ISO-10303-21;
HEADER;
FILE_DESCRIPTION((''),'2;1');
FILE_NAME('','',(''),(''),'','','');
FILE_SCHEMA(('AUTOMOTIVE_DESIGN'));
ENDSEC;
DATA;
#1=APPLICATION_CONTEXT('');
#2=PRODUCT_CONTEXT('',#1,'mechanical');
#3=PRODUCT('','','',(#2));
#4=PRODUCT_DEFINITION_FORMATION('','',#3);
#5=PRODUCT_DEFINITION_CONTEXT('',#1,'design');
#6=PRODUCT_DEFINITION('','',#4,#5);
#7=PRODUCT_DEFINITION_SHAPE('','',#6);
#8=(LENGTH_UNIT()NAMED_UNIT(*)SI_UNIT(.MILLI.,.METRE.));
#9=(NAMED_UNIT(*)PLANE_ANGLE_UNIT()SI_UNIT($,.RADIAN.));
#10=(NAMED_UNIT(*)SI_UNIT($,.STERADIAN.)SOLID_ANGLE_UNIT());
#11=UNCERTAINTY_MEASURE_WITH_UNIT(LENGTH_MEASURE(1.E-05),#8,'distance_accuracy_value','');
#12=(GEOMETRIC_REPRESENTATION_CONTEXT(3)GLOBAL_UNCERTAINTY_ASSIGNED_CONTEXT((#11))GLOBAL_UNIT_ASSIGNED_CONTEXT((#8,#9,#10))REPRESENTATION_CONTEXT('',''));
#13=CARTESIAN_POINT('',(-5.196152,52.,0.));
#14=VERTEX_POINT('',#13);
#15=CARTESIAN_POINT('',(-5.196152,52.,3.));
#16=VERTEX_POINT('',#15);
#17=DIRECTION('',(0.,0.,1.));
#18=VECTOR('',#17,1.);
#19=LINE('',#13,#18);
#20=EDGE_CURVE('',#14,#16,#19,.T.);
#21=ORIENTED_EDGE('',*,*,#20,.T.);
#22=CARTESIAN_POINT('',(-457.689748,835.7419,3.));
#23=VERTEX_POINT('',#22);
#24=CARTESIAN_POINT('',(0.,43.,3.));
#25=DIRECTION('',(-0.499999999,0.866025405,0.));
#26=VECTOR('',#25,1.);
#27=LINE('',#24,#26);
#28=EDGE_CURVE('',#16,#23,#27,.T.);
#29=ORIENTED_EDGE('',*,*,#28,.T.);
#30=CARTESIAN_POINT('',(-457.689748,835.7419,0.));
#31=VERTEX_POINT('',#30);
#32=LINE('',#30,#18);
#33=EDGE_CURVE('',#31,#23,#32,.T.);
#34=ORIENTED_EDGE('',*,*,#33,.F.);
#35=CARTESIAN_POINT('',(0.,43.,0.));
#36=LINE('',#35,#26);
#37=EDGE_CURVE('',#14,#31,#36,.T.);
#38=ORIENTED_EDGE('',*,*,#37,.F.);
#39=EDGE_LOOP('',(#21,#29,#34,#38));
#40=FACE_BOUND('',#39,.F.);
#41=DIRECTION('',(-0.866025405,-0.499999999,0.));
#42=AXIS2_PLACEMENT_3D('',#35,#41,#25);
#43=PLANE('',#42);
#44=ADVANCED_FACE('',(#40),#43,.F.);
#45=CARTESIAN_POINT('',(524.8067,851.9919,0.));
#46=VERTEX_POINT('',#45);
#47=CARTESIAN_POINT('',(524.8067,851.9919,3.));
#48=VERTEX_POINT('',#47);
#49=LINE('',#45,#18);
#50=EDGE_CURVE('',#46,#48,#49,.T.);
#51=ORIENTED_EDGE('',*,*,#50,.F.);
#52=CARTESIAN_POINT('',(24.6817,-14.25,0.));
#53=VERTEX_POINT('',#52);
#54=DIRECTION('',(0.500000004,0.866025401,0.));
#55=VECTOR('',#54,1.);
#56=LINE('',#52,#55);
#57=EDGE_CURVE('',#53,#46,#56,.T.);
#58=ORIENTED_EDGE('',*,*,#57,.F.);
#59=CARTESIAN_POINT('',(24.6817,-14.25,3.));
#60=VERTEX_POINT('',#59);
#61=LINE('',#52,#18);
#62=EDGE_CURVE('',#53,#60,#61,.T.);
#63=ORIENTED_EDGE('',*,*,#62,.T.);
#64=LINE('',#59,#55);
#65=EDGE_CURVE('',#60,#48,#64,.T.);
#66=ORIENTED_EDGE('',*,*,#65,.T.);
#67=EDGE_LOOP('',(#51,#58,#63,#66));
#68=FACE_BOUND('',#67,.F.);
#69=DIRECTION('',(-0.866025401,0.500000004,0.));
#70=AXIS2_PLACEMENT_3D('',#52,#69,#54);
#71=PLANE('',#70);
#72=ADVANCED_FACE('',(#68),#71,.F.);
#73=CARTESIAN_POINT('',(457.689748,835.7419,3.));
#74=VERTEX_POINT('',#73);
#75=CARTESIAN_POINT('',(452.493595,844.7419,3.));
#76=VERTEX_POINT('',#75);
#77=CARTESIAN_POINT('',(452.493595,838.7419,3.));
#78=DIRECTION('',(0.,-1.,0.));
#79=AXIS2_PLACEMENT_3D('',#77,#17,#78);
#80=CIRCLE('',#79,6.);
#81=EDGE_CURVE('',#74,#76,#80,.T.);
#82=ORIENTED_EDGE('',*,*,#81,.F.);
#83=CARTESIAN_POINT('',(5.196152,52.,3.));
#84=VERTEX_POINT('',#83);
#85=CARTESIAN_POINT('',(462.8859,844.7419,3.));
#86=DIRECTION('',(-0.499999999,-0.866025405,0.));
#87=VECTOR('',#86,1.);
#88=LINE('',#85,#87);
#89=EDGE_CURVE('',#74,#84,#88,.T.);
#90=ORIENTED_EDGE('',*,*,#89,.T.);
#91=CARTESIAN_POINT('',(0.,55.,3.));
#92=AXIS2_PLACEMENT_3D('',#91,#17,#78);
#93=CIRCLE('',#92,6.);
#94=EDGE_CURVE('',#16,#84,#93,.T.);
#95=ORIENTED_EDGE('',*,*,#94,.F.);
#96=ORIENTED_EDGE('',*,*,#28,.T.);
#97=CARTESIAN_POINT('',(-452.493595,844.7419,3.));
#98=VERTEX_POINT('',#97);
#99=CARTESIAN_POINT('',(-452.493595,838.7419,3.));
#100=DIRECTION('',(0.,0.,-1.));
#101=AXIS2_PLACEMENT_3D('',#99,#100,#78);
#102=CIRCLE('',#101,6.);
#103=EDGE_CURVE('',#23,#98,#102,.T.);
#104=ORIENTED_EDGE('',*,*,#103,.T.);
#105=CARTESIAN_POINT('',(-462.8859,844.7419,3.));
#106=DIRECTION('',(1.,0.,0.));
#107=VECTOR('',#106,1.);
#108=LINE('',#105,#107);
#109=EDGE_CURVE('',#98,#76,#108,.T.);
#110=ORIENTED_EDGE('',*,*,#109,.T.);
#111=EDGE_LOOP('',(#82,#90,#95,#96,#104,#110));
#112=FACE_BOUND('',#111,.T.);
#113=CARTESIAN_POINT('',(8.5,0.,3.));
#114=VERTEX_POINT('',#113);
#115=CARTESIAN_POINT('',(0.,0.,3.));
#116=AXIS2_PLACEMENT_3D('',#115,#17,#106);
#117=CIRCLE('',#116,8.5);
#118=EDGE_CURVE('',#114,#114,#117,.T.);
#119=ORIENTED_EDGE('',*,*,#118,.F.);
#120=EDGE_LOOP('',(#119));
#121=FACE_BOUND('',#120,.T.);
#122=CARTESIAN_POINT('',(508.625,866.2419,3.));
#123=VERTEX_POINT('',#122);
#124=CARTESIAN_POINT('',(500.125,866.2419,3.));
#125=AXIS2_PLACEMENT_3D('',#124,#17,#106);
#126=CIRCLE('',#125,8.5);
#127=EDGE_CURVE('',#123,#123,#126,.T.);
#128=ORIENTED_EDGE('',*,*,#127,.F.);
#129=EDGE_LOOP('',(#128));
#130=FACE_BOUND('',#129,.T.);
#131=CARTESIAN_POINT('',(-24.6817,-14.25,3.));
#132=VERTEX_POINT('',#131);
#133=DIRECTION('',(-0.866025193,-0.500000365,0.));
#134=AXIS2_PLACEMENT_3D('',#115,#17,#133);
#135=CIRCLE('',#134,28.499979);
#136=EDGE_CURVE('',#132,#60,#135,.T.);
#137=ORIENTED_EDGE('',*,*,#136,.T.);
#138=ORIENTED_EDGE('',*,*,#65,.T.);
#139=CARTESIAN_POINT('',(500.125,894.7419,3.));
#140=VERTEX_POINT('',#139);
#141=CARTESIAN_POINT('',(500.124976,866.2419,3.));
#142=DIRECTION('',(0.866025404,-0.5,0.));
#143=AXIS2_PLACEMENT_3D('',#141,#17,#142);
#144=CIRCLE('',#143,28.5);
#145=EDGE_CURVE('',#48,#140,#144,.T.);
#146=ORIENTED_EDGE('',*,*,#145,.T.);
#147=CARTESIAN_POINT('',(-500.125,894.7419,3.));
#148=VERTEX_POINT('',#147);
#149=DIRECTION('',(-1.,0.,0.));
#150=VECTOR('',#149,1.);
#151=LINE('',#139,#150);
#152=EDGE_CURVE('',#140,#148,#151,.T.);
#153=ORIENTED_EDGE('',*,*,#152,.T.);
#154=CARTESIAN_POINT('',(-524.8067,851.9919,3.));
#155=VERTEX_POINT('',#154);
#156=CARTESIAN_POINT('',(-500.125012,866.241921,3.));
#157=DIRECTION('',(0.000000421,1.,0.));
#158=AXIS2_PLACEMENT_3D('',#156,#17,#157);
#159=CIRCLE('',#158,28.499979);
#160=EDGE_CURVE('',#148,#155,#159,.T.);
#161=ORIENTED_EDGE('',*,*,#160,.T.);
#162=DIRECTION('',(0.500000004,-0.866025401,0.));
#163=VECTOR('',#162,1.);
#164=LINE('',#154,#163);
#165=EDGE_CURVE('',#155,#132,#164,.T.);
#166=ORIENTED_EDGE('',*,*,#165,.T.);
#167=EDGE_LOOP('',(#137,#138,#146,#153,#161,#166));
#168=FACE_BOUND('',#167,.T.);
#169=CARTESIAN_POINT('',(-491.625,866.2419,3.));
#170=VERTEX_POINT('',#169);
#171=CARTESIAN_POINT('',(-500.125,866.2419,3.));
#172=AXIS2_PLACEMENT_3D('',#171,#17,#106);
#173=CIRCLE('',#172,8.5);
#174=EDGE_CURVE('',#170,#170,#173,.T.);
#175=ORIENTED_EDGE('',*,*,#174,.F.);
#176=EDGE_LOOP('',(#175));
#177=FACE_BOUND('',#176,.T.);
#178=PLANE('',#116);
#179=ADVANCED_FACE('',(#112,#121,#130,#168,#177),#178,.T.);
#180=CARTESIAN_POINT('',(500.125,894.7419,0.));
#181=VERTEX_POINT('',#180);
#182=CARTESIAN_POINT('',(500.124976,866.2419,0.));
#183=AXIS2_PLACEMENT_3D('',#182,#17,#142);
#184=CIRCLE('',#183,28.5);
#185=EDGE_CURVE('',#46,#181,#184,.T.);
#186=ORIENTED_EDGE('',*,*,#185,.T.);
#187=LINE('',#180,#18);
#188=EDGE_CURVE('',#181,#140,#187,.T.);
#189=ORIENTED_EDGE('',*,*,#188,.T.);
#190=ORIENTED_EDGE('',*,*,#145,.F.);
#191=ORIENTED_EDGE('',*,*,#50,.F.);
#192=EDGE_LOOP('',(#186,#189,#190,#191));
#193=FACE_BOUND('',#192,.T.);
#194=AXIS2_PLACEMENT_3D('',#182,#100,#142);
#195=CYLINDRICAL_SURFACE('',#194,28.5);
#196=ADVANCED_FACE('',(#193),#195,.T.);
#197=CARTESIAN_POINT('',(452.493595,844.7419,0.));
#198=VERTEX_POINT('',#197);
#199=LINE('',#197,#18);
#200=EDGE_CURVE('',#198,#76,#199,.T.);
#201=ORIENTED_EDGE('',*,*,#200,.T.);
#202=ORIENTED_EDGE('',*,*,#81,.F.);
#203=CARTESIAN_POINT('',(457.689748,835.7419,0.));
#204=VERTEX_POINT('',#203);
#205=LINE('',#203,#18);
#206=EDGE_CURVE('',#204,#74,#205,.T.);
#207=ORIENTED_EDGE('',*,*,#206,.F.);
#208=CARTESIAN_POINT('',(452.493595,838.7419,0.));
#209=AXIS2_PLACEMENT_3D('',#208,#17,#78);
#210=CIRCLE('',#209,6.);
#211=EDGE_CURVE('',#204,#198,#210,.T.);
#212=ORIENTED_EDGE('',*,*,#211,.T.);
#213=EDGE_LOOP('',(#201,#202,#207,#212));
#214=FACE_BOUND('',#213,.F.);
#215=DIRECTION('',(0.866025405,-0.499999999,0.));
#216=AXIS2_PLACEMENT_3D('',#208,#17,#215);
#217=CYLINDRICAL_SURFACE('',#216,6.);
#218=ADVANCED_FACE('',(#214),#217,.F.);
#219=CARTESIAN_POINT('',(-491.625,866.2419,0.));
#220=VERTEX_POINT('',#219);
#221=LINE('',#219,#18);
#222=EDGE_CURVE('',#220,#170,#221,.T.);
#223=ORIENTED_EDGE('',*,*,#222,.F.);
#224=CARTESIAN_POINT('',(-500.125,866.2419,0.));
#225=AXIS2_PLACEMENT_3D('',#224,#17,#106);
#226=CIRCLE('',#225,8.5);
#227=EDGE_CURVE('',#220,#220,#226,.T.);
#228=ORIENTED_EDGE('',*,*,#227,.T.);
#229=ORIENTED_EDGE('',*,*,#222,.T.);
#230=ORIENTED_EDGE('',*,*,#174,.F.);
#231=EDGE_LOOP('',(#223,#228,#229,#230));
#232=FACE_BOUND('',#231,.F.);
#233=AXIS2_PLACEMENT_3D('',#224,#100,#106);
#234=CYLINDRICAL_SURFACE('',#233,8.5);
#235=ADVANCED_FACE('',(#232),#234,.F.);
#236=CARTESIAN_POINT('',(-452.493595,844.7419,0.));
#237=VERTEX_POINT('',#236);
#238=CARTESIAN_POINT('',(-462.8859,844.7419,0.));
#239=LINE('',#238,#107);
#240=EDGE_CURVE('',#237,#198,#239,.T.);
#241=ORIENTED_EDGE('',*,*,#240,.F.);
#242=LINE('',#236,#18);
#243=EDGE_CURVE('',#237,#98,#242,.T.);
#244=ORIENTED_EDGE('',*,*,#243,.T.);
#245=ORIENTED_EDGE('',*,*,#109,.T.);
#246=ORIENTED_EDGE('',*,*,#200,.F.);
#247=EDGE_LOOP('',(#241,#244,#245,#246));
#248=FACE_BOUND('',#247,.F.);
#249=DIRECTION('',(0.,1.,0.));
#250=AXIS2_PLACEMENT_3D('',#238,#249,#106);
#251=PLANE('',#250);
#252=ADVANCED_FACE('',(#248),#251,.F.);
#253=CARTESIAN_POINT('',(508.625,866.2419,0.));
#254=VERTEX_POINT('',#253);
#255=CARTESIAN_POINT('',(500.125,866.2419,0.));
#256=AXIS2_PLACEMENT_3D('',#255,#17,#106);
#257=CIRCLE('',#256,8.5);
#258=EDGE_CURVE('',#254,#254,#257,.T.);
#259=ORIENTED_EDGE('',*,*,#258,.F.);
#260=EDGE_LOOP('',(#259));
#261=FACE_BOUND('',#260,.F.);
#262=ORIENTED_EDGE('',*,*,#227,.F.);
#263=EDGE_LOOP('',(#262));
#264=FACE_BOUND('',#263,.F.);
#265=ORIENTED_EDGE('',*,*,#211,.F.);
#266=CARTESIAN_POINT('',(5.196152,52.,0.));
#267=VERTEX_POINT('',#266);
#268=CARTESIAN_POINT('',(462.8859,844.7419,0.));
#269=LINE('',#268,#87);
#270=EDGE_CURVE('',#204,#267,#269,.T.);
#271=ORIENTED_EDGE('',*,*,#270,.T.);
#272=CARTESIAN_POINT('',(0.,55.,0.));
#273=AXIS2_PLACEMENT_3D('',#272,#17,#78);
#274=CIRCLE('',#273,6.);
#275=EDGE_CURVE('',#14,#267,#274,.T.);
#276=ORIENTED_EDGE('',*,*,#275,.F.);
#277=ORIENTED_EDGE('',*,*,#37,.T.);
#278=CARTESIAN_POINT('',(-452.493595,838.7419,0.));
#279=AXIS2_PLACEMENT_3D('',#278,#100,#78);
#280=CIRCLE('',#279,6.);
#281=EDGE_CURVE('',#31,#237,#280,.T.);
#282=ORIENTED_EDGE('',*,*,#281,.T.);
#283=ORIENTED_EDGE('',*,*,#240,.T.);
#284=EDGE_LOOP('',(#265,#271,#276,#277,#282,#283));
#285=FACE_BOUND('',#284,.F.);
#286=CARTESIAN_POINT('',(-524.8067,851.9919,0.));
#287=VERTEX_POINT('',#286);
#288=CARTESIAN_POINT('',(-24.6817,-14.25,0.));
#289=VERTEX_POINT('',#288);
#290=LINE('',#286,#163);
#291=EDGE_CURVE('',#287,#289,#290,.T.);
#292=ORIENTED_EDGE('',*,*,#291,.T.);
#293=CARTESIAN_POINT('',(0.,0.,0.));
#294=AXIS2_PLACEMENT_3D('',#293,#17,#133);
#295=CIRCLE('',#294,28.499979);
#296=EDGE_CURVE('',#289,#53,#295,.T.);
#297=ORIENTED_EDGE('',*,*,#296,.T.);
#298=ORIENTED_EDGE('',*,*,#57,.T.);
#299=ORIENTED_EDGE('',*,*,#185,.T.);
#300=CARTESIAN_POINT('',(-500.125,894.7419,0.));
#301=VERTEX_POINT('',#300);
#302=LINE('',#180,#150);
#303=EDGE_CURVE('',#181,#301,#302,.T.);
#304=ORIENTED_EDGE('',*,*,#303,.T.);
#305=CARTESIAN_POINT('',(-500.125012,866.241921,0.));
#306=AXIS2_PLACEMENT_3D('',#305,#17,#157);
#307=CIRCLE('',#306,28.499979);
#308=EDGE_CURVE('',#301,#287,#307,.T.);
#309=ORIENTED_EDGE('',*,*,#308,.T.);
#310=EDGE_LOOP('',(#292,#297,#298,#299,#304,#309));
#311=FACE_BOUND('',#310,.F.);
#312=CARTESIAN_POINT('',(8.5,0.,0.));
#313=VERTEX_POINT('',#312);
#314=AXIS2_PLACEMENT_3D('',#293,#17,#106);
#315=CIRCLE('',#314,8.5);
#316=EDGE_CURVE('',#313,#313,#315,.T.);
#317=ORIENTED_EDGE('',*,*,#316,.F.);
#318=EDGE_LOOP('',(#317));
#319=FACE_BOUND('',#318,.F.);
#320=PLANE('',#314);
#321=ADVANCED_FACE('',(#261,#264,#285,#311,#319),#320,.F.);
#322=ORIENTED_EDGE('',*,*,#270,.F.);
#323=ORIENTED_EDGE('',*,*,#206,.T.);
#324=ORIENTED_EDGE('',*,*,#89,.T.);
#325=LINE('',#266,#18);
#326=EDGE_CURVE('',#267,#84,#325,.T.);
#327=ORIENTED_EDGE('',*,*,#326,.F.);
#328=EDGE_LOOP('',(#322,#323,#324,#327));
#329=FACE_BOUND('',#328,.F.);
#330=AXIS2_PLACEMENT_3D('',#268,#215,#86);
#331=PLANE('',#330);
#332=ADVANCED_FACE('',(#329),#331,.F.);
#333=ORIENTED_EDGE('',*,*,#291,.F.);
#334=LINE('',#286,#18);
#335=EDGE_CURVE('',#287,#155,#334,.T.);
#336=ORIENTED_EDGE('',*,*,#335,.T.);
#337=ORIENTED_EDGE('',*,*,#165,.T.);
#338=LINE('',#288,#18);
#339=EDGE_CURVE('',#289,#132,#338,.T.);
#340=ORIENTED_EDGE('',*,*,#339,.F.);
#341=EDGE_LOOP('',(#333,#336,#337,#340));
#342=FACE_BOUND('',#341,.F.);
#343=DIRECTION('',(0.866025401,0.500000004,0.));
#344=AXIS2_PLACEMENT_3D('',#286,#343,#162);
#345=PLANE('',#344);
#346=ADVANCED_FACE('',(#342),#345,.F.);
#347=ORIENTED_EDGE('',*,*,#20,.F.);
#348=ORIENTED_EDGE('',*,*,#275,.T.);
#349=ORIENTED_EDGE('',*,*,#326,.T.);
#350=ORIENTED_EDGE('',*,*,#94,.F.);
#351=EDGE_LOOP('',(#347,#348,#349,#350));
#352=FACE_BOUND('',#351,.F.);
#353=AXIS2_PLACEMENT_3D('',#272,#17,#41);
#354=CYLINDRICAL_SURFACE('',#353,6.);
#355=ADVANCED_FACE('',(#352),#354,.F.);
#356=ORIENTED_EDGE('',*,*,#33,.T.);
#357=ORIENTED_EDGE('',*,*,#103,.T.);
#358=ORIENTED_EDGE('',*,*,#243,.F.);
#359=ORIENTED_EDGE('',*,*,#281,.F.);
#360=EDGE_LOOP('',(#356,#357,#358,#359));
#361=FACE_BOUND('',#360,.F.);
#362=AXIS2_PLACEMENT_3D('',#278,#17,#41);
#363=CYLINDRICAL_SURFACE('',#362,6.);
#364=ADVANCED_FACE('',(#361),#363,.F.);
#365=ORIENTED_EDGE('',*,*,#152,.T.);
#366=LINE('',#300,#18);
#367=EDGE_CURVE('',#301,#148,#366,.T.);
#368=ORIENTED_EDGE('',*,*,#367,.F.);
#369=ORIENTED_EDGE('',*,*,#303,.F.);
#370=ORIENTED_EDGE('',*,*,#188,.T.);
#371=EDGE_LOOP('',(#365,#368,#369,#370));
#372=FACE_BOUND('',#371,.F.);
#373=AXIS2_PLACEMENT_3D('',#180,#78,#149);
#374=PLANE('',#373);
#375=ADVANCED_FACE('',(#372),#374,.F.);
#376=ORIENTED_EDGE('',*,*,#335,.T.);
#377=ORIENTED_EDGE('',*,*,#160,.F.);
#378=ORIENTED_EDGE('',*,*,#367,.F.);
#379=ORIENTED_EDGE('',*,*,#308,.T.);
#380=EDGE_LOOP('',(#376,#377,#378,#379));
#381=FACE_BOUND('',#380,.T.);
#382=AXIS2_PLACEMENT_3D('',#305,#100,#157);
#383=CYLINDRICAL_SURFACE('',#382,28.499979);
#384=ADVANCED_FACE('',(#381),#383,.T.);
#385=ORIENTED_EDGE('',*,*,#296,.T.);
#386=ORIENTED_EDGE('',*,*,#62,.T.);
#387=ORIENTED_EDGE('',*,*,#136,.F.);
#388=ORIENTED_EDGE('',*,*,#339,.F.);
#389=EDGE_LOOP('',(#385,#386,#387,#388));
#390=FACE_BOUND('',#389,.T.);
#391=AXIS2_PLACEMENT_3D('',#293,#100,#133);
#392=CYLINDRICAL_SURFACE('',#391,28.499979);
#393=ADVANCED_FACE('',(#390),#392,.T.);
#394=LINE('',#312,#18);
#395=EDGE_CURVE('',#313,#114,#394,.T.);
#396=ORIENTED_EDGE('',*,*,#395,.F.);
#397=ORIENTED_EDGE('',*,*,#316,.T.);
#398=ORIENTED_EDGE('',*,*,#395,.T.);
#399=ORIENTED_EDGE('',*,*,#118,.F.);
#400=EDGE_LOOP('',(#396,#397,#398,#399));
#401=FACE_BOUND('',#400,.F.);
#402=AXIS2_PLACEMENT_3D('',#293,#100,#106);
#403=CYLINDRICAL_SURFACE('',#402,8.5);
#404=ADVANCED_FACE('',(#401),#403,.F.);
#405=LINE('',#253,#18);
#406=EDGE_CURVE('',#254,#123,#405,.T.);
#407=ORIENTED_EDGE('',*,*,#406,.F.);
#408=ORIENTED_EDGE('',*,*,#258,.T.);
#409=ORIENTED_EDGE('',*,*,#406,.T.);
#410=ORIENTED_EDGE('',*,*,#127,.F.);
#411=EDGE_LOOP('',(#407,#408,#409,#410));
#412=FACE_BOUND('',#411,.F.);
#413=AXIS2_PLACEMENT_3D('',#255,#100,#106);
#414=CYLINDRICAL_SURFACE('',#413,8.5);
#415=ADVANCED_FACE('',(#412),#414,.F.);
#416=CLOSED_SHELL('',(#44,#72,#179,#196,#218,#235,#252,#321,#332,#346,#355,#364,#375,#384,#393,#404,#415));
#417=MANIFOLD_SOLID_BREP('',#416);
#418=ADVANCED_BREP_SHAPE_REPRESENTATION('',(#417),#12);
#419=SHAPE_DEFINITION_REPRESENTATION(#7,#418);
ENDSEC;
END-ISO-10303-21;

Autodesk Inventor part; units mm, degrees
ref_plane "YZ Plane" through (0, 0, 0) normal (1, 0, 0) x (0, 1, 0)
ref_plane "XZ Plane" through (0, 0, 0) normal (0, 1, 0) x (-1, 0, 0)
ref_plane "XY Plane" through (0, 0, 0) normal (0, 0, 1) x (1, 0, 0)
sketch "Sketch1" plane through (0, 0, 0) normal (0, 0, 1) x (1, 0, 0)
  circle A0 centre (0, 0) radius 8.5
  line L0 (-524.8067, 851.9919) -> (-24.6817, -14.25)
  arc A1 (-24.6817, -14.25) -> (24.6817, -14.25) centre (0, 0) ccw
  line L1 (24.6817, -14.25) -> (524.8067, 851.9919)
  arc A2 (524.8067, 851.9919) -> (500.125, 894.7419) centre (500.125, 866.2419) ccw
  line L2 (500.125, 894.7419) -> (-500.125, 894.7419)
  arc A3 (-500.125, 894.7419) -> (-524.8067, 851.9919) centre (-500.125, 866.2419) ccw
  line L3 (0, 0) -> (0, 894.7419) construction
  line L4 (-462.8859, 844.7419) -> (462.8859, 844.7419)
  line L5 (462.8859, 844.7419) -> (0, 43)
  line L6 (0, 43) -> (-462.8859, 844.7419)
  circle A4 centre (-500.125, 866.2419) radius 8.5
  circle A5 centre (500.125, 866.2419) radius 8.5
  dimension "d34" = 17
  dimension "d35" = 20
  dimension "d36" = 1000.25
  dimension "d37" = 1000.25
  dimension "d38" = 50
  dimension "d39" = 17
  dimension "d40" = 17
extrude "Plate1" add sketch "Sketch1" along normal blind 3
fillet "Corner Round3" radius 6 3 edges at (-462.8859, 844.7419, 1.5) (0, 43, 1.5) (462.8859, 844.7419, 1.5)
equation "\"d37\" = d36"
equation "\"d2\" = Thickness"
equation "\"BendReliefWidth\" = Thickness"
equation "\"BendReliefDepth\" = 0.5 * Thickness"
equation "\"CornerReliefSize\" = 4 * Thickness"
equation "\"MinimumRemnant\" = 2 * Thickness"
equation "\"TransitionRadius\" = BendRadius"
equation "\"JacobiRadiusSize\" = BendRadius"
equation "\"GapSize\" = Thickness"
equation "\"Thickness\" = 3"
equation "\"BendRadius\" = 5"
properties part number "TZS 1289 leg pattern" material "Stainless Steel"
